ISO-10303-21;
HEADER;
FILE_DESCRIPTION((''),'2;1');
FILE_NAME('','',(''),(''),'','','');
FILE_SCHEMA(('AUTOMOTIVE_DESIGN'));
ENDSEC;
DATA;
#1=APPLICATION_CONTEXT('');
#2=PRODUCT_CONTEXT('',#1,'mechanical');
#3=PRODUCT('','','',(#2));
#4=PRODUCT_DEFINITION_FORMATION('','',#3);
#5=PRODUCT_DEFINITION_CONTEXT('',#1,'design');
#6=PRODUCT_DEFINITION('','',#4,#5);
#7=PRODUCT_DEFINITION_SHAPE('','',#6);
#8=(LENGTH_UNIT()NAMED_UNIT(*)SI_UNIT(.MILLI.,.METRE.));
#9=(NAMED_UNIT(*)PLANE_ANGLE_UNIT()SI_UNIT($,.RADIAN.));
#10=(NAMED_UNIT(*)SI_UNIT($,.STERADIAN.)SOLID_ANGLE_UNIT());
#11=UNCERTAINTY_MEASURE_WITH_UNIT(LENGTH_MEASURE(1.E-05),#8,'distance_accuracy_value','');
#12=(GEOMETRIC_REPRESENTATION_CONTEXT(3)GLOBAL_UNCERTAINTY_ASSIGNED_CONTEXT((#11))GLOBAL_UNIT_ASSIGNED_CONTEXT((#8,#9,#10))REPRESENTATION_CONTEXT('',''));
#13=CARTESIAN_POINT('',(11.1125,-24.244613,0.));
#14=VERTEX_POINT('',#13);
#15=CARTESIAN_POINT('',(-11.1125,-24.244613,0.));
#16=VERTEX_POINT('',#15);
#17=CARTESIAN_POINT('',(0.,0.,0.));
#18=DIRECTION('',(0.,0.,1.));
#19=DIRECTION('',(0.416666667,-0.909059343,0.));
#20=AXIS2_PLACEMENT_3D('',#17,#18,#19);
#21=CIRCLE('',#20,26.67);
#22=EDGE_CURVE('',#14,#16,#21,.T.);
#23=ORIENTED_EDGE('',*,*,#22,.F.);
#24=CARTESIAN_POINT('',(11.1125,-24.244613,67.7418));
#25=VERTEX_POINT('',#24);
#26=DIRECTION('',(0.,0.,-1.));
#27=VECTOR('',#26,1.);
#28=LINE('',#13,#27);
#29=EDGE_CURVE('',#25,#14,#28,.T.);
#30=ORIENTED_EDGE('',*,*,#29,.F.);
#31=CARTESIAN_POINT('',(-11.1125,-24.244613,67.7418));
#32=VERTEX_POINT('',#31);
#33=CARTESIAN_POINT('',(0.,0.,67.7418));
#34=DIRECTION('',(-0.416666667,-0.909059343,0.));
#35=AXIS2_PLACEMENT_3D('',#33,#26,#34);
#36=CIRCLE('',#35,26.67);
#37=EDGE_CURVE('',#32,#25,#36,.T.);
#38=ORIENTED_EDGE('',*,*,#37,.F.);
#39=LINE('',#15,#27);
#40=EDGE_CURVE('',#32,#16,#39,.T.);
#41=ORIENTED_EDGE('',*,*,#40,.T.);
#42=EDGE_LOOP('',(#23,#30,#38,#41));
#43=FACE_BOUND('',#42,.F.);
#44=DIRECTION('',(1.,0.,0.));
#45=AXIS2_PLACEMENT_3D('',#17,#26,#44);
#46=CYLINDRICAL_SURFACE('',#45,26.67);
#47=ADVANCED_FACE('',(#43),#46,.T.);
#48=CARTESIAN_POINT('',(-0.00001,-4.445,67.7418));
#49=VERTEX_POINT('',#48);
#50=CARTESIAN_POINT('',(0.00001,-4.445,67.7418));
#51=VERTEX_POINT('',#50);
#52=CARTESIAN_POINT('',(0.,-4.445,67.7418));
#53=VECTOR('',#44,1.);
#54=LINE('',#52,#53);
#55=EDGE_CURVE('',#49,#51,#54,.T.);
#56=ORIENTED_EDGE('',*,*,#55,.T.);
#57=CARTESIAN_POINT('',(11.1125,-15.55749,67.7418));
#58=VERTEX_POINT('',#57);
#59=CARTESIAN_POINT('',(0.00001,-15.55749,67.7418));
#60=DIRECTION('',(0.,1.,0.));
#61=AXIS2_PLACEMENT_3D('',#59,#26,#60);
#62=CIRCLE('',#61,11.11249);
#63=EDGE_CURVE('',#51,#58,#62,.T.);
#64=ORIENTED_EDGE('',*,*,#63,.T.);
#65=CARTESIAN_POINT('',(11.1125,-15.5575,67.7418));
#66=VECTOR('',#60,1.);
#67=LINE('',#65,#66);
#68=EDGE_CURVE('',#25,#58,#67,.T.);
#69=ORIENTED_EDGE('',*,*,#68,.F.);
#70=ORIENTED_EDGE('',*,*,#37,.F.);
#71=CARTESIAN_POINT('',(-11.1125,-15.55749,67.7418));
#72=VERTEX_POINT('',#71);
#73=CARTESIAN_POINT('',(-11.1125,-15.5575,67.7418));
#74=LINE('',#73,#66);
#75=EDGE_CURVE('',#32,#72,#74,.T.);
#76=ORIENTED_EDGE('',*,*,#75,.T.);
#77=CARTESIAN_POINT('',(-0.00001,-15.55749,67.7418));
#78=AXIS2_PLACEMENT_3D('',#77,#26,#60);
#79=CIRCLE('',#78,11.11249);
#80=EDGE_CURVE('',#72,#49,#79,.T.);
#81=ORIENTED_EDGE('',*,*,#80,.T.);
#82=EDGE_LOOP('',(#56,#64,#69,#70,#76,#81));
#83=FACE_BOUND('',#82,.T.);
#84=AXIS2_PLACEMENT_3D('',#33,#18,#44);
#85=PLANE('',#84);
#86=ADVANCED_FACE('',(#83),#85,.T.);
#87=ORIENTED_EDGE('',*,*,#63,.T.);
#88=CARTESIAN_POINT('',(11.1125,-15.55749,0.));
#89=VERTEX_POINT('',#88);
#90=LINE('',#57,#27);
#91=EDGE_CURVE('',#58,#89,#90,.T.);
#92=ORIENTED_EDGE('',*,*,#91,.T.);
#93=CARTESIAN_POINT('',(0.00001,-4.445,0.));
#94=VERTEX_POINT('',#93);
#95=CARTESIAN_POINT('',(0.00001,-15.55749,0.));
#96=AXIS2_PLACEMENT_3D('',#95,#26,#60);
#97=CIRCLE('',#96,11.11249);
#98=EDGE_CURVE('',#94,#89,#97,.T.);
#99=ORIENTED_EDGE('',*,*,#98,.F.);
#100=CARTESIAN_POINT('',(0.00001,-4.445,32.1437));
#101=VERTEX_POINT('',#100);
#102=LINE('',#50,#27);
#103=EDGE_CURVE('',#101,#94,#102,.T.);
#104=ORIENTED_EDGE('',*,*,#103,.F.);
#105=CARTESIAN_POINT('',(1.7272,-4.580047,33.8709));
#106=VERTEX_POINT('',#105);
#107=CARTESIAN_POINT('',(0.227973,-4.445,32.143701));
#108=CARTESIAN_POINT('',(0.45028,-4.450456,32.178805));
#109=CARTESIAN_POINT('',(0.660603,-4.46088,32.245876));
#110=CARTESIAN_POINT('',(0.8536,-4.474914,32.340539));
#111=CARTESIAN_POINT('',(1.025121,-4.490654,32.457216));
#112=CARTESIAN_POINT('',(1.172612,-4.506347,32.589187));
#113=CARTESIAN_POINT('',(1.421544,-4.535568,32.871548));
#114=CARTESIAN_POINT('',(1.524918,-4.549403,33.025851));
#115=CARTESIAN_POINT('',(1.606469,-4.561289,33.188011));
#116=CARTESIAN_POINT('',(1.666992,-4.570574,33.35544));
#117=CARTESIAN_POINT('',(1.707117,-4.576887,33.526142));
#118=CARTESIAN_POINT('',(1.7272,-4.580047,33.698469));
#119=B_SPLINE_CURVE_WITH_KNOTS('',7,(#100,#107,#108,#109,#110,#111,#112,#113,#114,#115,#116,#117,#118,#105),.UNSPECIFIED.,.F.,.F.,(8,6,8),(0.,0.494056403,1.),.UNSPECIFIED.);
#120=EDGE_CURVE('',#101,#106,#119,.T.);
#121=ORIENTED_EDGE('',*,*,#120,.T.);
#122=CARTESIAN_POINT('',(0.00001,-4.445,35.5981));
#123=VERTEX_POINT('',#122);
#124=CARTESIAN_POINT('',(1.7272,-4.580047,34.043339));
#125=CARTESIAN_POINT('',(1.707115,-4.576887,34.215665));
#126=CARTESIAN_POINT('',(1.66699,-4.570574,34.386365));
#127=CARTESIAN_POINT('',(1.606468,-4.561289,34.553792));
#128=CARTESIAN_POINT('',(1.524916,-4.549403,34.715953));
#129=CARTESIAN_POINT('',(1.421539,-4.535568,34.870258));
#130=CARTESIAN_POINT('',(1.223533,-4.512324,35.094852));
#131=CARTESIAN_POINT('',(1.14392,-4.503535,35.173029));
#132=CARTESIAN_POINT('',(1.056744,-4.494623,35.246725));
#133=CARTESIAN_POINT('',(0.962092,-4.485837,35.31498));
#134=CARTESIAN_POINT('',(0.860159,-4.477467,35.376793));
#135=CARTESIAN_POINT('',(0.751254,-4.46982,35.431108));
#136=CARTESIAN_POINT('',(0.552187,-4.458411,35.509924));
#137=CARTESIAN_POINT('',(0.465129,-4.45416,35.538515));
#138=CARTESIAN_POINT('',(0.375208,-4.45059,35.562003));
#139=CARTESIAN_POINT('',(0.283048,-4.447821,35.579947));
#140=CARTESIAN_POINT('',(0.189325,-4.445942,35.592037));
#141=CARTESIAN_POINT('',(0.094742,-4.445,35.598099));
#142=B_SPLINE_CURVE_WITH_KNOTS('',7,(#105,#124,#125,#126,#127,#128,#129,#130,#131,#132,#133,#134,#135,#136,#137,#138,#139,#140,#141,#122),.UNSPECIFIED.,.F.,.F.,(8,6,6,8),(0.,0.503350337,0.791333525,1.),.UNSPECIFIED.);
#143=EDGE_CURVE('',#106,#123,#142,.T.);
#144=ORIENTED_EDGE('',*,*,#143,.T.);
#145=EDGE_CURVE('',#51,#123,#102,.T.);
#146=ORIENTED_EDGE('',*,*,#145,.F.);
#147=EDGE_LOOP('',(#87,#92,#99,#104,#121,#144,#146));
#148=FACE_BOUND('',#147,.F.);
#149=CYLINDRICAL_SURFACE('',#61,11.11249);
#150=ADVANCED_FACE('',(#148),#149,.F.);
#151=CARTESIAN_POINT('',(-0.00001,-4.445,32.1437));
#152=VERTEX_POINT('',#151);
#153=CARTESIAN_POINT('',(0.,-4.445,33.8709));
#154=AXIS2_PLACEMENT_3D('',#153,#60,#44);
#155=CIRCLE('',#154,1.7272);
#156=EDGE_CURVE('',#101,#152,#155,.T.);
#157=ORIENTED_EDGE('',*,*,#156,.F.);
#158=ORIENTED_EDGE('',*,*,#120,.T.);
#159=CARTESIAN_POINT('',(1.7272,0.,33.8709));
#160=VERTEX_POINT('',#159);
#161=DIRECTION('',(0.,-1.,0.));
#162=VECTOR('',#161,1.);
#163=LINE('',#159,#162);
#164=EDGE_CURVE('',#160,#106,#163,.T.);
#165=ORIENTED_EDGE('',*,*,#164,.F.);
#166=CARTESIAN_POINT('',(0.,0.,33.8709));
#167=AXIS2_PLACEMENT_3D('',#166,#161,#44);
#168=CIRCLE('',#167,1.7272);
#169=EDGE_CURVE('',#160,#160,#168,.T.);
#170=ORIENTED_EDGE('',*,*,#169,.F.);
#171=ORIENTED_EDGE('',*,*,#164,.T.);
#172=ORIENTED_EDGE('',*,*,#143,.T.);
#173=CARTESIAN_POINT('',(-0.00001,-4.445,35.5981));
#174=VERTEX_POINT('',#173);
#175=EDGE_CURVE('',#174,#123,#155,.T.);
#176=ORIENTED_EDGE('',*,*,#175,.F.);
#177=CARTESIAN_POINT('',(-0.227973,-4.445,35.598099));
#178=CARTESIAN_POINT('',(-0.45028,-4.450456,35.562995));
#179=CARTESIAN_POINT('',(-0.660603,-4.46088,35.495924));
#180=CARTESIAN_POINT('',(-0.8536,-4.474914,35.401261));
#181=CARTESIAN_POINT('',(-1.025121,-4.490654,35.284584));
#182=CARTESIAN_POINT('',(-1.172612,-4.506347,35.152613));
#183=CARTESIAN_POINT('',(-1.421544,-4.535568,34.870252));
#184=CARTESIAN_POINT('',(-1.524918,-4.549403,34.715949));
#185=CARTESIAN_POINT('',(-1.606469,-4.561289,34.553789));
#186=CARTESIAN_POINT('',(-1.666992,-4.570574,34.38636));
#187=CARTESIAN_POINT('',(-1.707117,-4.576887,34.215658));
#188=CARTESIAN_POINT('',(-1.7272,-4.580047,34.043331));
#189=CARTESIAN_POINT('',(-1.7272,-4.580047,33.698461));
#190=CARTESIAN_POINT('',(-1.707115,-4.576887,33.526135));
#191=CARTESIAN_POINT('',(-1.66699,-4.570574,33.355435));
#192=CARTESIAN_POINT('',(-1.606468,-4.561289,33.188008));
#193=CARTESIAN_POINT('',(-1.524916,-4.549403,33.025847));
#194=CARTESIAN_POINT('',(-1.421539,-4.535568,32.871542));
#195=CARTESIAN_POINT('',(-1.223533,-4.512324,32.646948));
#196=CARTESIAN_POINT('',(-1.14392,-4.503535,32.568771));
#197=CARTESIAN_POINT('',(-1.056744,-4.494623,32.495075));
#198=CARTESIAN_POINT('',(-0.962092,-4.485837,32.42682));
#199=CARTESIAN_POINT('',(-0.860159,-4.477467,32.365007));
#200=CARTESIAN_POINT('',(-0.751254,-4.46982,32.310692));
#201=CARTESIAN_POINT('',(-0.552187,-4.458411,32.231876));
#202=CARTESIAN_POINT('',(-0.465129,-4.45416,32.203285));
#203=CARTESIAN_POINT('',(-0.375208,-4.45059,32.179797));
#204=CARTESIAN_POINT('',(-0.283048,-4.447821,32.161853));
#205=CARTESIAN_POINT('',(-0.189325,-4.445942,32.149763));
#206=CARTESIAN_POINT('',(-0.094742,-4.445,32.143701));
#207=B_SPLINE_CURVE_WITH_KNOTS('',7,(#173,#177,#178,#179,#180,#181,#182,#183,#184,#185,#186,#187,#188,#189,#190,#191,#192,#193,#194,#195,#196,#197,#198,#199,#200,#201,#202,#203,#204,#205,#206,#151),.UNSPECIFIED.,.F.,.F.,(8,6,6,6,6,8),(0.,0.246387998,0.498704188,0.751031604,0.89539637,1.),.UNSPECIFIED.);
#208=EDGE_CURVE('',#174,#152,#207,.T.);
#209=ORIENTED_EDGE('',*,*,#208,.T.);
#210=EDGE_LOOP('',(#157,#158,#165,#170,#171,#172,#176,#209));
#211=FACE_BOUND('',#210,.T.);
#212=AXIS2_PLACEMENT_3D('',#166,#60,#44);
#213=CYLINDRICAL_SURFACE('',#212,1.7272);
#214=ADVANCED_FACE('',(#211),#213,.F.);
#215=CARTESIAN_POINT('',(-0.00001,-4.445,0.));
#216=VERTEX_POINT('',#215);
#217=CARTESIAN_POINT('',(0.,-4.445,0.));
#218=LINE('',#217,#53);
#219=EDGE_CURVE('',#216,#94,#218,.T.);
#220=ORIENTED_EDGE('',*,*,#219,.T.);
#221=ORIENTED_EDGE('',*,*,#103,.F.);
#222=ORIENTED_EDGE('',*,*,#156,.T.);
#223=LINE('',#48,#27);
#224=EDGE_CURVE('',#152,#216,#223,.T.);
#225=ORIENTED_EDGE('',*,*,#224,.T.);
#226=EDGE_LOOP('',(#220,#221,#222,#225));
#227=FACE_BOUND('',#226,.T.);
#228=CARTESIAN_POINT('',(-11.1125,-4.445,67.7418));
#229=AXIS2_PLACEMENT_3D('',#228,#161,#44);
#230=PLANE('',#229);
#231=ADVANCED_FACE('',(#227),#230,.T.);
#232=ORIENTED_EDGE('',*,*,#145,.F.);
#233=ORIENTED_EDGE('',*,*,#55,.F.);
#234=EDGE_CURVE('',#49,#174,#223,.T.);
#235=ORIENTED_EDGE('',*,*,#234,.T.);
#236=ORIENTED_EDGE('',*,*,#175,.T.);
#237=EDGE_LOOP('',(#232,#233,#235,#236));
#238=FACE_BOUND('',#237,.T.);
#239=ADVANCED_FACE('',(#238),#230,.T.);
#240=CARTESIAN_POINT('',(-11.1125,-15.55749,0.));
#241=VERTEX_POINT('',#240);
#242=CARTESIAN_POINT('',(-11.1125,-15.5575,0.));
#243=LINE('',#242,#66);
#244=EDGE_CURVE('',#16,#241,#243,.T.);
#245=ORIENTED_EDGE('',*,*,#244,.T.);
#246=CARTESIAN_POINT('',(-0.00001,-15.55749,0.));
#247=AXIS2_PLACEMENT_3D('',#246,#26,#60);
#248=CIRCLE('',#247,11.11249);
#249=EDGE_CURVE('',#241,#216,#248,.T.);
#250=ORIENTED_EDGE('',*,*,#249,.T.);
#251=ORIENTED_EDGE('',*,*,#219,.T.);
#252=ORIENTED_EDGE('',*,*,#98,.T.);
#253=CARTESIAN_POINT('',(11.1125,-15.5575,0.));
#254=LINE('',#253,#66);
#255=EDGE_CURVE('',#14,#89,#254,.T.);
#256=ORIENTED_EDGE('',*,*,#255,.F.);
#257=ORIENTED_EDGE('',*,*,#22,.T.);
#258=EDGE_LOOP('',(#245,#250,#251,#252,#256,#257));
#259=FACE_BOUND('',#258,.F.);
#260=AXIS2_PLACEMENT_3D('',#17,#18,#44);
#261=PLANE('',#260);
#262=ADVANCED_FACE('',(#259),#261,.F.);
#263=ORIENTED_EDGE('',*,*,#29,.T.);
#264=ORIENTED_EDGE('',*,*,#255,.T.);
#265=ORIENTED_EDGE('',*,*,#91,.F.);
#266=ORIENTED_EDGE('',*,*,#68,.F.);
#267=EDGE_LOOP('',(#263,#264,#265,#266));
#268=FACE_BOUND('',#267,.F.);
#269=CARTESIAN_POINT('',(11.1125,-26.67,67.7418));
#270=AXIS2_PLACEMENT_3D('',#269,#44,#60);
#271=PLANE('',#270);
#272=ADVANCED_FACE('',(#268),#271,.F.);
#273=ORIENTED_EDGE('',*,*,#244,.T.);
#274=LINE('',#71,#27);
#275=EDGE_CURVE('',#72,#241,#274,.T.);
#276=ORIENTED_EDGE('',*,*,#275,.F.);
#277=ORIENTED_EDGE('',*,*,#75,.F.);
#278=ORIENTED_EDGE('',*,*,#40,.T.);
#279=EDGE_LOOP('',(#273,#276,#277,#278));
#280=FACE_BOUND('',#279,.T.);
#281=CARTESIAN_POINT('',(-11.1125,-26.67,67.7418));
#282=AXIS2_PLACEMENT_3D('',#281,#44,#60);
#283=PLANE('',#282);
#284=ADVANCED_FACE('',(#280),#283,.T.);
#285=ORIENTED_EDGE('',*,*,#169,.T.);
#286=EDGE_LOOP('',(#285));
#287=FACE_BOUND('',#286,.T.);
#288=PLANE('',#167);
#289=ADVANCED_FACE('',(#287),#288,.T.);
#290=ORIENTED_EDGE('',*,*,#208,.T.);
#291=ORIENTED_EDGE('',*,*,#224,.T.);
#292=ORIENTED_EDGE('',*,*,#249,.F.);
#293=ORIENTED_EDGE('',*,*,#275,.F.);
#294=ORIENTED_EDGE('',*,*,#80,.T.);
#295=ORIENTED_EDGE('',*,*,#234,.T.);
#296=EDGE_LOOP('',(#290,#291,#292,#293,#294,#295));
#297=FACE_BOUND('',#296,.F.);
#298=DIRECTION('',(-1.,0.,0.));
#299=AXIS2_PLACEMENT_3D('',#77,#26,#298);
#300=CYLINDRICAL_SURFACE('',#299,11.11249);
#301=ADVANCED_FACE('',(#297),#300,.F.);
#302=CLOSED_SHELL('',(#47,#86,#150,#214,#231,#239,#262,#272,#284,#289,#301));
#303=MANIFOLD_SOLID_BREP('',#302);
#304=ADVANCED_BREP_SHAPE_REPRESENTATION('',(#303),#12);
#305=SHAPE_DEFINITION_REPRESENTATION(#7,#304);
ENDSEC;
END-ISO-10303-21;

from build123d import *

# Parameters (mm, degrees)
F0_R     = 26.67
F1_DEPTH = 67.7418
F2_W     = 22.225
F2_H     = 22.225
F3_DEPTH = 67.7418
F4_R     = 11.11249
F5_R     = 1.7272
F6_DEPTH = 5.5800505253


# Not quite as in the source:
# - a fillet or chamfer is up to 0.001 mm smaller than in the source, because OpenCascade refuses the exact size


with BuildPart() as f1:
    # F0 (on Top) → F1 (new body)
    with BuildSketch(Plane.XY):
        Circle(F0_R)
    extrude(amount=F1_DEPTH)

    # F2 (on face) → F3 (cut, through all)
    with BuildSketch(Plane.XY.offset(67.7418)):
        with Locations((0, -15.5575)):
            Rectangle(F2_W, F2_H)
    extrude(amount=-F3_DEPTH, mode=Mode.SUBTRACT)

    # F4 (radius 11.1125 in the source; OpenCascade refuses exactly that, so slightly less here)
    f4_edges = [f1.edges().sort_by_distance(p)[0] for p in [
        (11.1125, -4.445, 33.8709),
        (-11.1125, -4.445, 33.8709),
    ]]
    fillet(f4_edges, radius=F4_R)

    # F5 (on Front) → F6 (cut, up to face)
    with BuildSketch(Plane.XZ):
        with Locations((0, 33.8709)):
            Circle(F5_R)
    extrude(amount=F6_DEPTH, mode=Mode.SUBTRACT)


solid = f1.part
